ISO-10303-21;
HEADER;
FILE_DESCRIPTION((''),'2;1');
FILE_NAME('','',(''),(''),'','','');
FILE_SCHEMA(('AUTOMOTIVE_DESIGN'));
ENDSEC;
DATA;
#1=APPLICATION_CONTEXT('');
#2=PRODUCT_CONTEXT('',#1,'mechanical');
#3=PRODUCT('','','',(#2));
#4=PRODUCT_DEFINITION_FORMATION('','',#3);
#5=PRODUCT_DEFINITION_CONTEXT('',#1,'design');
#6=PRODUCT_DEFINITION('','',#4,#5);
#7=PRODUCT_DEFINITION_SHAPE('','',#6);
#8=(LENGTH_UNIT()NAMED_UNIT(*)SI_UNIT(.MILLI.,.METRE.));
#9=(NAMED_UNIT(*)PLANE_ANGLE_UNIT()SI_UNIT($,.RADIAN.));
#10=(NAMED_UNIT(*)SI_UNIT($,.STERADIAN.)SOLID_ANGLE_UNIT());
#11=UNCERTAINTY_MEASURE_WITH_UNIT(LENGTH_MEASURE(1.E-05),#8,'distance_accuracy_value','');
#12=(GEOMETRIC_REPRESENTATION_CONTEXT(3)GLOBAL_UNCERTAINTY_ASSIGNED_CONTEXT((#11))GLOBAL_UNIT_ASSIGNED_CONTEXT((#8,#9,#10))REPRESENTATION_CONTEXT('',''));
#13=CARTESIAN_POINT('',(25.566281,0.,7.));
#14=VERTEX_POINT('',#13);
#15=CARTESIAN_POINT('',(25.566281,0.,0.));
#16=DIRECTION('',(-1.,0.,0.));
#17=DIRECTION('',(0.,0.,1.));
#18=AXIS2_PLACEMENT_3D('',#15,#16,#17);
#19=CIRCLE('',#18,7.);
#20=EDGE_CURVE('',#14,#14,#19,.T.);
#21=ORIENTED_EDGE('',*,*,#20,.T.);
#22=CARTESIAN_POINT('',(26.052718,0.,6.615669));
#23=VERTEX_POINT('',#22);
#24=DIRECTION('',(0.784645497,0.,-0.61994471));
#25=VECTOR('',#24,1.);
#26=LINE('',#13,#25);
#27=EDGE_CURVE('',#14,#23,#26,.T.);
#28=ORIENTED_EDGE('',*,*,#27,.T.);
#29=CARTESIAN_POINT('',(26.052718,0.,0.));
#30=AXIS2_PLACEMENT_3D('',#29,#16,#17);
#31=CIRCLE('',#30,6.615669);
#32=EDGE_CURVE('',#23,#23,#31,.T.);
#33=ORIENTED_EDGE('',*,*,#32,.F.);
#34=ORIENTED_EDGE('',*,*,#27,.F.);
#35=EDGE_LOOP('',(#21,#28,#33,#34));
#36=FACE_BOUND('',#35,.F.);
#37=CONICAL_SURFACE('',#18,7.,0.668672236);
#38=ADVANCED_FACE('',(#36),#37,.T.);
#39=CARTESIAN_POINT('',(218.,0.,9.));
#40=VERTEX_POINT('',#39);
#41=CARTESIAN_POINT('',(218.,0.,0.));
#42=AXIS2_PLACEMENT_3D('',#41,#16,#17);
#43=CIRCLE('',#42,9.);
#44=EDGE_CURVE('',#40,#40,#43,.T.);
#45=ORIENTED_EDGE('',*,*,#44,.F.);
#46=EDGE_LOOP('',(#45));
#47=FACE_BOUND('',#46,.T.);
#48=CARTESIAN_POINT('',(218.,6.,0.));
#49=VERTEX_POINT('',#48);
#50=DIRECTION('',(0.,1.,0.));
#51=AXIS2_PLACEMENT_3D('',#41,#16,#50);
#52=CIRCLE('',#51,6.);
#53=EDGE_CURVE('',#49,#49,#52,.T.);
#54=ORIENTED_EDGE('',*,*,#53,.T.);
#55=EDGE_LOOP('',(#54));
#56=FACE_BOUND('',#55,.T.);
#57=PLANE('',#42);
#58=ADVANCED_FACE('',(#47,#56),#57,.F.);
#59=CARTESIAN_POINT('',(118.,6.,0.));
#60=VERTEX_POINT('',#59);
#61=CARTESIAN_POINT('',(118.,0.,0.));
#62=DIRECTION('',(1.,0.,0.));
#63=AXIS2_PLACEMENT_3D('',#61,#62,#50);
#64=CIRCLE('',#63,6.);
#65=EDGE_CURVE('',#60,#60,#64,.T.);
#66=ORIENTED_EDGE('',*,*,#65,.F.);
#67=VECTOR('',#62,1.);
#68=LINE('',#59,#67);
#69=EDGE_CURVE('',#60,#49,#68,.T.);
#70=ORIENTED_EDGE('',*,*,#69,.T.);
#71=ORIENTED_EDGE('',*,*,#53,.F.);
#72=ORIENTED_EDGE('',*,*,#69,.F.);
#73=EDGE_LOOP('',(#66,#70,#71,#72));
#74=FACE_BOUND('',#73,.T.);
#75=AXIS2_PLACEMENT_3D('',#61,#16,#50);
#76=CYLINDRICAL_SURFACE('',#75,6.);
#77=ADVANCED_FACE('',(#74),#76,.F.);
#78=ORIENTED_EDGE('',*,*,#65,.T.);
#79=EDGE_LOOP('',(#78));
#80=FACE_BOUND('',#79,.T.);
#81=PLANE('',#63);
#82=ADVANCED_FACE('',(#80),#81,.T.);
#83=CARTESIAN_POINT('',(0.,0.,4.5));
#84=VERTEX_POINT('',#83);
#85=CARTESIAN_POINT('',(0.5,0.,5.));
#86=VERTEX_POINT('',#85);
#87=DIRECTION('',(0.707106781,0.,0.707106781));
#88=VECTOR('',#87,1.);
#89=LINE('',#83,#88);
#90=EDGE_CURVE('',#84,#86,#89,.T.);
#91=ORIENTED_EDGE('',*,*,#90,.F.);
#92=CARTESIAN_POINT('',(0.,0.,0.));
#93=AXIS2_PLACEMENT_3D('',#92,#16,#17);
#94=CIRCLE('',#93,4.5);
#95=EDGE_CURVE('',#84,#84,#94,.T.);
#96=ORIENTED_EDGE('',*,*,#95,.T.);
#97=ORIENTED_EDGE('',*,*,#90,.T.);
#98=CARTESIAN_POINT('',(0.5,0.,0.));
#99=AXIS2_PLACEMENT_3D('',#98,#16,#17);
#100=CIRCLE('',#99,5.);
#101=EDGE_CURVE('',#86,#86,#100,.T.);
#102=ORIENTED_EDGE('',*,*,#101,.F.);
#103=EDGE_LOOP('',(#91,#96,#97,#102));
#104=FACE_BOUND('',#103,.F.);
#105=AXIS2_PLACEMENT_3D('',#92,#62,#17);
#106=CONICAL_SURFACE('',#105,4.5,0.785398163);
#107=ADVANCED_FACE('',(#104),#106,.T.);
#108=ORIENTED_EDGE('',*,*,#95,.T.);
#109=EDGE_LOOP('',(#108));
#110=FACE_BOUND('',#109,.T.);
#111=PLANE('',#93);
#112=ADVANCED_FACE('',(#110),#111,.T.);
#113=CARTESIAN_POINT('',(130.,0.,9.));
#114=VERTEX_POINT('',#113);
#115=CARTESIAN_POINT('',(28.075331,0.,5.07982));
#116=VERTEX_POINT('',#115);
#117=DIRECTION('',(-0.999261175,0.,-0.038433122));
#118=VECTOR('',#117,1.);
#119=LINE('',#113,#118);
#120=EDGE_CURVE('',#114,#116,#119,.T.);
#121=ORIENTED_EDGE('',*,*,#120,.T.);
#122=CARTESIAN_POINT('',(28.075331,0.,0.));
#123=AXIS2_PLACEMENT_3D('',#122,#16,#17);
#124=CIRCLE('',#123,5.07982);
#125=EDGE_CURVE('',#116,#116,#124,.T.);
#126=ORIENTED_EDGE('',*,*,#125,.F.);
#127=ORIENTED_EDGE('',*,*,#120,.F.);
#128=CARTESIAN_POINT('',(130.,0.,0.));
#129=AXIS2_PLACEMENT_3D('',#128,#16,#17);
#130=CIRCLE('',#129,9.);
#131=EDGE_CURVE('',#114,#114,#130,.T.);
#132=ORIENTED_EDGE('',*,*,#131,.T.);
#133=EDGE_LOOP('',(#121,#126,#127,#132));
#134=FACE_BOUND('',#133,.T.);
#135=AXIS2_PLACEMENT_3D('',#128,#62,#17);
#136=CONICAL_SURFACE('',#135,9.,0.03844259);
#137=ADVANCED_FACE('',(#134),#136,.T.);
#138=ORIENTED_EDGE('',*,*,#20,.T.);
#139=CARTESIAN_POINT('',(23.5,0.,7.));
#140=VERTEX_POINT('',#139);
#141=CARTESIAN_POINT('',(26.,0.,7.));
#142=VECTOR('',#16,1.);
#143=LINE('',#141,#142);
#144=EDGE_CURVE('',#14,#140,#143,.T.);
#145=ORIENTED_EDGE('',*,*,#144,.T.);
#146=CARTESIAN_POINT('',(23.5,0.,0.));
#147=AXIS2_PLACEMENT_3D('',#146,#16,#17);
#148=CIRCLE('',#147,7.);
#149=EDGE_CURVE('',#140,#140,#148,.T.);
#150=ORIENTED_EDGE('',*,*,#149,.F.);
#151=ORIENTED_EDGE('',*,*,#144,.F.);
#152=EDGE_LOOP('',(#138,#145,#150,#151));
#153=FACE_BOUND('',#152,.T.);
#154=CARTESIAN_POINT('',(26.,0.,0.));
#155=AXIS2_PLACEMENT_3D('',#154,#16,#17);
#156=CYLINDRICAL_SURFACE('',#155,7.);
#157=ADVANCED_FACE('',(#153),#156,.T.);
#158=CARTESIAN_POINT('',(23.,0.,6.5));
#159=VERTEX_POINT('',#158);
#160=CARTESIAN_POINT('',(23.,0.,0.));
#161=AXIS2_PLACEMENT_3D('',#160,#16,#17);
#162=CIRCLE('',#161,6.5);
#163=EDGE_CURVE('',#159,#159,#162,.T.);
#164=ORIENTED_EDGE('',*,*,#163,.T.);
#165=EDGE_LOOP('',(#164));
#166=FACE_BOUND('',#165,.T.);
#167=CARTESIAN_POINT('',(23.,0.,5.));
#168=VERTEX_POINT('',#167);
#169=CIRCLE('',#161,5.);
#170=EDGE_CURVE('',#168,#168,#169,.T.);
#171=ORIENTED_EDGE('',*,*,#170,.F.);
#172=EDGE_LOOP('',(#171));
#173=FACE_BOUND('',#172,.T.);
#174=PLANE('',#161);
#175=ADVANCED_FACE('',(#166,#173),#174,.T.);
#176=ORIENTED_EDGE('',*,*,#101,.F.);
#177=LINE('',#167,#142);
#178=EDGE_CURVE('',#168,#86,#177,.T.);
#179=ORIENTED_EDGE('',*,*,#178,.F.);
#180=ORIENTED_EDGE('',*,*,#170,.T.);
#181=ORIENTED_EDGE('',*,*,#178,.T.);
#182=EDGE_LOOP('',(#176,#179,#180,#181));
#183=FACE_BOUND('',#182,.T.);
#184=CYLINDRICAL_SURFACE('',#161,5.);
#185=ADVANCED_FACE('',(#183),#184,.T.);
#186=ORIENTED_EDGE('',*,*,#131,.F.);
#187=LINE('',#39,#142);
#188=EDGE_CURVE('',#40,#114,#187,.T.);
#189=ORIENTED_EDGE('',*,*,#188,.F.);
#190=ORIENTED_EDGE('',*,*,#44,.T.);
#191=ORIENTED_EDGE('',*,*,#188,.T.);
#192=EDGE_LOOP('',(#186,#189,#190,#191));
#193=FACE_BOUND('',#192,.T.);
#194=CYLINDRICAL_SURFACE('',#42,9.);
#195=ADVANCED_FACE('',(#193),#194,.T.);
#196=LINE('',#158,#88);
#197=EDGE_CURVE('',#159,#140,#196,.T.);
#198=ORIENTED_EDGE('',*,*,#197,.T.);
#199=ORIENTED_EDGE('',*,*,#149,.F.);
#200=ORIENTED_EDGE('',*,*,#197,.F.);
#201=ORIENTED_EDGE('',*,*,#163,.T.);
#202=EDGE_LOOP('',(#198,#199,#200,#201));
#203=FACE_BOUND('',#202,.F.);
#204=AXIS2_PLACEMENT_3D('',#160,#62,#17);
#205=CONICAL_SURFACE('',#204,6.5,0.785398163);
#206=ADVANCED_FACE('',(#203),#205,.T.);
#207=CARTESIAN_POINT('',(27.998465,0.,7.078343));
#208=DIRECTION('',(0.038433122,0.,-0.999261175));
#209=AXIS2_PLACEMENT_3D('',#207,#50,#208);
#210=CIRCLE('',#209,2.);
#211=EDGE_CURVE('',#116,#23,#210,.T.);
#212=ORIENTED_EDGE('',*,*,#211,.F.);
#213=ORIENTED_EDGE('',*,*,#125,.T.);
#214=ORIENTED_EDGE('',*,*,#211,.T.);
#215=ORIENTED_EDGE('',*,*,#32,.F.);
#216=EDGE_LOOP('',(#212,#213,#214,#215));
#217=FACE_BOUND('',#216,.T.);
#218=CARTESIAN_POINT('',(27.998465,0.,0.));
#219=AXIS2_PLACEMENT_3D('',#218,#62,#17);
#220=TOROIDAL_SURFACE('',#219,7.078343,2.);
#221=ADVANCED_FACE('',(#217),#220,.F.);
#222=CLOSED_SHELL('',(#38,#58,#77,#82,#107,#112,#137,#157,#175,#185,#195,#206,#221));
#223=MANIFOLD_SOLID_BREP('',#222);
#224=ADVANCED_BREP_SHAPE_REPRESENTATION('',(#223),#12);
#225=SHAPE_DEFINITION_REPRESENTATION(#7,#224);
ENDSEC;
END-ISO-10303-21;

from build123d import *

# Parameters (mm, degrees)
F5_START = 118
F4_R     = 6
F5_DEPTH = 102


# Not quite as in the source:
# - a fillet or chamfer that OpenCascade refuses, or shapes differently, is made with other operations: its cross-section is extruded or revolved along the edge and cut away or added


with BuildPart() as f1:
    # F0 (on Front) → F1 (revolve)
    with BuildSketch(Plane.XZ):
        Polygon((0, 5), (0, 0), (218, 0), (218, 9), (130, 9), (26, 5), (26, 7), (23, 7), (23, 5), align=None)
    revolve(axis=Axis((109, 0, 0), (-1, 0, 0)))

    # F2: fillet of radius 2 on 1 edges, made by hand

    # F2_s1 → F2_t2 (revolve)
    with BuildSketch(Plane.XZ):
        with BuildLine():
            ThreePointArc((28.0753312573, 5.079820433), (26.6401911638, 5.6103195704), (26, 7))
            Line((26, 7), (26, 5))
            Line((26, 5), (28.0753312573, 5.079820433))
        make_face()
    revolve(axis=Axis((26, 0, 0), (-1, 0, 0)))

    # F3: chamfer of 0.5 on 3 edges, made by hand

    # F3_s1 → F3_t2 (revolve, cut)
    with BuildSketch(Plane.XZ):
        Polygon((23, 6.5), (23.5, 7), (23, 7), align=None)
    revolve(axis=Axis((23, 0, 0), (-1, 0, 0)), mode=Mode.SUBTRACT)

    # F3_s3 → F3_t4 (revolve, cut)
    with BuildSketch(Plane.XZ):
        Polygon((0, 4.5), (0.5, 5), (0, 5), align=None)
    revolve(axis=Axis((0, 0, 0), (-1, 0, 0)), mode=Mode.SUBTRACT)

    # F3_s5 → F3_t6 (revolve, cut)
    with BuildSketch(Plane.XZ):
        with BuildLine():
            Line((25.5662808863, 7), (26.0527177117, 6.6156685564))
            ThreePointArc((26.0527177117, 6.6156685564), (26.0180191961, 6.799354671), (26, 7))
            Line((26, 7), (25.5662808863, 7))
        make_face()
    revolve(axis=Axis((26, 0, 0), (-1, 0, 0)), mode=Mode.SUBTRACT)

    # F4 (on Right) → F5 (cut)
    with BuildSketch(Plane.YZ.offset(F5_START)):
        Circle(F4_R)
    extrude(amount=F5_DEPTH, mode=Mode.SUBTRACT)


solid = f1.part
